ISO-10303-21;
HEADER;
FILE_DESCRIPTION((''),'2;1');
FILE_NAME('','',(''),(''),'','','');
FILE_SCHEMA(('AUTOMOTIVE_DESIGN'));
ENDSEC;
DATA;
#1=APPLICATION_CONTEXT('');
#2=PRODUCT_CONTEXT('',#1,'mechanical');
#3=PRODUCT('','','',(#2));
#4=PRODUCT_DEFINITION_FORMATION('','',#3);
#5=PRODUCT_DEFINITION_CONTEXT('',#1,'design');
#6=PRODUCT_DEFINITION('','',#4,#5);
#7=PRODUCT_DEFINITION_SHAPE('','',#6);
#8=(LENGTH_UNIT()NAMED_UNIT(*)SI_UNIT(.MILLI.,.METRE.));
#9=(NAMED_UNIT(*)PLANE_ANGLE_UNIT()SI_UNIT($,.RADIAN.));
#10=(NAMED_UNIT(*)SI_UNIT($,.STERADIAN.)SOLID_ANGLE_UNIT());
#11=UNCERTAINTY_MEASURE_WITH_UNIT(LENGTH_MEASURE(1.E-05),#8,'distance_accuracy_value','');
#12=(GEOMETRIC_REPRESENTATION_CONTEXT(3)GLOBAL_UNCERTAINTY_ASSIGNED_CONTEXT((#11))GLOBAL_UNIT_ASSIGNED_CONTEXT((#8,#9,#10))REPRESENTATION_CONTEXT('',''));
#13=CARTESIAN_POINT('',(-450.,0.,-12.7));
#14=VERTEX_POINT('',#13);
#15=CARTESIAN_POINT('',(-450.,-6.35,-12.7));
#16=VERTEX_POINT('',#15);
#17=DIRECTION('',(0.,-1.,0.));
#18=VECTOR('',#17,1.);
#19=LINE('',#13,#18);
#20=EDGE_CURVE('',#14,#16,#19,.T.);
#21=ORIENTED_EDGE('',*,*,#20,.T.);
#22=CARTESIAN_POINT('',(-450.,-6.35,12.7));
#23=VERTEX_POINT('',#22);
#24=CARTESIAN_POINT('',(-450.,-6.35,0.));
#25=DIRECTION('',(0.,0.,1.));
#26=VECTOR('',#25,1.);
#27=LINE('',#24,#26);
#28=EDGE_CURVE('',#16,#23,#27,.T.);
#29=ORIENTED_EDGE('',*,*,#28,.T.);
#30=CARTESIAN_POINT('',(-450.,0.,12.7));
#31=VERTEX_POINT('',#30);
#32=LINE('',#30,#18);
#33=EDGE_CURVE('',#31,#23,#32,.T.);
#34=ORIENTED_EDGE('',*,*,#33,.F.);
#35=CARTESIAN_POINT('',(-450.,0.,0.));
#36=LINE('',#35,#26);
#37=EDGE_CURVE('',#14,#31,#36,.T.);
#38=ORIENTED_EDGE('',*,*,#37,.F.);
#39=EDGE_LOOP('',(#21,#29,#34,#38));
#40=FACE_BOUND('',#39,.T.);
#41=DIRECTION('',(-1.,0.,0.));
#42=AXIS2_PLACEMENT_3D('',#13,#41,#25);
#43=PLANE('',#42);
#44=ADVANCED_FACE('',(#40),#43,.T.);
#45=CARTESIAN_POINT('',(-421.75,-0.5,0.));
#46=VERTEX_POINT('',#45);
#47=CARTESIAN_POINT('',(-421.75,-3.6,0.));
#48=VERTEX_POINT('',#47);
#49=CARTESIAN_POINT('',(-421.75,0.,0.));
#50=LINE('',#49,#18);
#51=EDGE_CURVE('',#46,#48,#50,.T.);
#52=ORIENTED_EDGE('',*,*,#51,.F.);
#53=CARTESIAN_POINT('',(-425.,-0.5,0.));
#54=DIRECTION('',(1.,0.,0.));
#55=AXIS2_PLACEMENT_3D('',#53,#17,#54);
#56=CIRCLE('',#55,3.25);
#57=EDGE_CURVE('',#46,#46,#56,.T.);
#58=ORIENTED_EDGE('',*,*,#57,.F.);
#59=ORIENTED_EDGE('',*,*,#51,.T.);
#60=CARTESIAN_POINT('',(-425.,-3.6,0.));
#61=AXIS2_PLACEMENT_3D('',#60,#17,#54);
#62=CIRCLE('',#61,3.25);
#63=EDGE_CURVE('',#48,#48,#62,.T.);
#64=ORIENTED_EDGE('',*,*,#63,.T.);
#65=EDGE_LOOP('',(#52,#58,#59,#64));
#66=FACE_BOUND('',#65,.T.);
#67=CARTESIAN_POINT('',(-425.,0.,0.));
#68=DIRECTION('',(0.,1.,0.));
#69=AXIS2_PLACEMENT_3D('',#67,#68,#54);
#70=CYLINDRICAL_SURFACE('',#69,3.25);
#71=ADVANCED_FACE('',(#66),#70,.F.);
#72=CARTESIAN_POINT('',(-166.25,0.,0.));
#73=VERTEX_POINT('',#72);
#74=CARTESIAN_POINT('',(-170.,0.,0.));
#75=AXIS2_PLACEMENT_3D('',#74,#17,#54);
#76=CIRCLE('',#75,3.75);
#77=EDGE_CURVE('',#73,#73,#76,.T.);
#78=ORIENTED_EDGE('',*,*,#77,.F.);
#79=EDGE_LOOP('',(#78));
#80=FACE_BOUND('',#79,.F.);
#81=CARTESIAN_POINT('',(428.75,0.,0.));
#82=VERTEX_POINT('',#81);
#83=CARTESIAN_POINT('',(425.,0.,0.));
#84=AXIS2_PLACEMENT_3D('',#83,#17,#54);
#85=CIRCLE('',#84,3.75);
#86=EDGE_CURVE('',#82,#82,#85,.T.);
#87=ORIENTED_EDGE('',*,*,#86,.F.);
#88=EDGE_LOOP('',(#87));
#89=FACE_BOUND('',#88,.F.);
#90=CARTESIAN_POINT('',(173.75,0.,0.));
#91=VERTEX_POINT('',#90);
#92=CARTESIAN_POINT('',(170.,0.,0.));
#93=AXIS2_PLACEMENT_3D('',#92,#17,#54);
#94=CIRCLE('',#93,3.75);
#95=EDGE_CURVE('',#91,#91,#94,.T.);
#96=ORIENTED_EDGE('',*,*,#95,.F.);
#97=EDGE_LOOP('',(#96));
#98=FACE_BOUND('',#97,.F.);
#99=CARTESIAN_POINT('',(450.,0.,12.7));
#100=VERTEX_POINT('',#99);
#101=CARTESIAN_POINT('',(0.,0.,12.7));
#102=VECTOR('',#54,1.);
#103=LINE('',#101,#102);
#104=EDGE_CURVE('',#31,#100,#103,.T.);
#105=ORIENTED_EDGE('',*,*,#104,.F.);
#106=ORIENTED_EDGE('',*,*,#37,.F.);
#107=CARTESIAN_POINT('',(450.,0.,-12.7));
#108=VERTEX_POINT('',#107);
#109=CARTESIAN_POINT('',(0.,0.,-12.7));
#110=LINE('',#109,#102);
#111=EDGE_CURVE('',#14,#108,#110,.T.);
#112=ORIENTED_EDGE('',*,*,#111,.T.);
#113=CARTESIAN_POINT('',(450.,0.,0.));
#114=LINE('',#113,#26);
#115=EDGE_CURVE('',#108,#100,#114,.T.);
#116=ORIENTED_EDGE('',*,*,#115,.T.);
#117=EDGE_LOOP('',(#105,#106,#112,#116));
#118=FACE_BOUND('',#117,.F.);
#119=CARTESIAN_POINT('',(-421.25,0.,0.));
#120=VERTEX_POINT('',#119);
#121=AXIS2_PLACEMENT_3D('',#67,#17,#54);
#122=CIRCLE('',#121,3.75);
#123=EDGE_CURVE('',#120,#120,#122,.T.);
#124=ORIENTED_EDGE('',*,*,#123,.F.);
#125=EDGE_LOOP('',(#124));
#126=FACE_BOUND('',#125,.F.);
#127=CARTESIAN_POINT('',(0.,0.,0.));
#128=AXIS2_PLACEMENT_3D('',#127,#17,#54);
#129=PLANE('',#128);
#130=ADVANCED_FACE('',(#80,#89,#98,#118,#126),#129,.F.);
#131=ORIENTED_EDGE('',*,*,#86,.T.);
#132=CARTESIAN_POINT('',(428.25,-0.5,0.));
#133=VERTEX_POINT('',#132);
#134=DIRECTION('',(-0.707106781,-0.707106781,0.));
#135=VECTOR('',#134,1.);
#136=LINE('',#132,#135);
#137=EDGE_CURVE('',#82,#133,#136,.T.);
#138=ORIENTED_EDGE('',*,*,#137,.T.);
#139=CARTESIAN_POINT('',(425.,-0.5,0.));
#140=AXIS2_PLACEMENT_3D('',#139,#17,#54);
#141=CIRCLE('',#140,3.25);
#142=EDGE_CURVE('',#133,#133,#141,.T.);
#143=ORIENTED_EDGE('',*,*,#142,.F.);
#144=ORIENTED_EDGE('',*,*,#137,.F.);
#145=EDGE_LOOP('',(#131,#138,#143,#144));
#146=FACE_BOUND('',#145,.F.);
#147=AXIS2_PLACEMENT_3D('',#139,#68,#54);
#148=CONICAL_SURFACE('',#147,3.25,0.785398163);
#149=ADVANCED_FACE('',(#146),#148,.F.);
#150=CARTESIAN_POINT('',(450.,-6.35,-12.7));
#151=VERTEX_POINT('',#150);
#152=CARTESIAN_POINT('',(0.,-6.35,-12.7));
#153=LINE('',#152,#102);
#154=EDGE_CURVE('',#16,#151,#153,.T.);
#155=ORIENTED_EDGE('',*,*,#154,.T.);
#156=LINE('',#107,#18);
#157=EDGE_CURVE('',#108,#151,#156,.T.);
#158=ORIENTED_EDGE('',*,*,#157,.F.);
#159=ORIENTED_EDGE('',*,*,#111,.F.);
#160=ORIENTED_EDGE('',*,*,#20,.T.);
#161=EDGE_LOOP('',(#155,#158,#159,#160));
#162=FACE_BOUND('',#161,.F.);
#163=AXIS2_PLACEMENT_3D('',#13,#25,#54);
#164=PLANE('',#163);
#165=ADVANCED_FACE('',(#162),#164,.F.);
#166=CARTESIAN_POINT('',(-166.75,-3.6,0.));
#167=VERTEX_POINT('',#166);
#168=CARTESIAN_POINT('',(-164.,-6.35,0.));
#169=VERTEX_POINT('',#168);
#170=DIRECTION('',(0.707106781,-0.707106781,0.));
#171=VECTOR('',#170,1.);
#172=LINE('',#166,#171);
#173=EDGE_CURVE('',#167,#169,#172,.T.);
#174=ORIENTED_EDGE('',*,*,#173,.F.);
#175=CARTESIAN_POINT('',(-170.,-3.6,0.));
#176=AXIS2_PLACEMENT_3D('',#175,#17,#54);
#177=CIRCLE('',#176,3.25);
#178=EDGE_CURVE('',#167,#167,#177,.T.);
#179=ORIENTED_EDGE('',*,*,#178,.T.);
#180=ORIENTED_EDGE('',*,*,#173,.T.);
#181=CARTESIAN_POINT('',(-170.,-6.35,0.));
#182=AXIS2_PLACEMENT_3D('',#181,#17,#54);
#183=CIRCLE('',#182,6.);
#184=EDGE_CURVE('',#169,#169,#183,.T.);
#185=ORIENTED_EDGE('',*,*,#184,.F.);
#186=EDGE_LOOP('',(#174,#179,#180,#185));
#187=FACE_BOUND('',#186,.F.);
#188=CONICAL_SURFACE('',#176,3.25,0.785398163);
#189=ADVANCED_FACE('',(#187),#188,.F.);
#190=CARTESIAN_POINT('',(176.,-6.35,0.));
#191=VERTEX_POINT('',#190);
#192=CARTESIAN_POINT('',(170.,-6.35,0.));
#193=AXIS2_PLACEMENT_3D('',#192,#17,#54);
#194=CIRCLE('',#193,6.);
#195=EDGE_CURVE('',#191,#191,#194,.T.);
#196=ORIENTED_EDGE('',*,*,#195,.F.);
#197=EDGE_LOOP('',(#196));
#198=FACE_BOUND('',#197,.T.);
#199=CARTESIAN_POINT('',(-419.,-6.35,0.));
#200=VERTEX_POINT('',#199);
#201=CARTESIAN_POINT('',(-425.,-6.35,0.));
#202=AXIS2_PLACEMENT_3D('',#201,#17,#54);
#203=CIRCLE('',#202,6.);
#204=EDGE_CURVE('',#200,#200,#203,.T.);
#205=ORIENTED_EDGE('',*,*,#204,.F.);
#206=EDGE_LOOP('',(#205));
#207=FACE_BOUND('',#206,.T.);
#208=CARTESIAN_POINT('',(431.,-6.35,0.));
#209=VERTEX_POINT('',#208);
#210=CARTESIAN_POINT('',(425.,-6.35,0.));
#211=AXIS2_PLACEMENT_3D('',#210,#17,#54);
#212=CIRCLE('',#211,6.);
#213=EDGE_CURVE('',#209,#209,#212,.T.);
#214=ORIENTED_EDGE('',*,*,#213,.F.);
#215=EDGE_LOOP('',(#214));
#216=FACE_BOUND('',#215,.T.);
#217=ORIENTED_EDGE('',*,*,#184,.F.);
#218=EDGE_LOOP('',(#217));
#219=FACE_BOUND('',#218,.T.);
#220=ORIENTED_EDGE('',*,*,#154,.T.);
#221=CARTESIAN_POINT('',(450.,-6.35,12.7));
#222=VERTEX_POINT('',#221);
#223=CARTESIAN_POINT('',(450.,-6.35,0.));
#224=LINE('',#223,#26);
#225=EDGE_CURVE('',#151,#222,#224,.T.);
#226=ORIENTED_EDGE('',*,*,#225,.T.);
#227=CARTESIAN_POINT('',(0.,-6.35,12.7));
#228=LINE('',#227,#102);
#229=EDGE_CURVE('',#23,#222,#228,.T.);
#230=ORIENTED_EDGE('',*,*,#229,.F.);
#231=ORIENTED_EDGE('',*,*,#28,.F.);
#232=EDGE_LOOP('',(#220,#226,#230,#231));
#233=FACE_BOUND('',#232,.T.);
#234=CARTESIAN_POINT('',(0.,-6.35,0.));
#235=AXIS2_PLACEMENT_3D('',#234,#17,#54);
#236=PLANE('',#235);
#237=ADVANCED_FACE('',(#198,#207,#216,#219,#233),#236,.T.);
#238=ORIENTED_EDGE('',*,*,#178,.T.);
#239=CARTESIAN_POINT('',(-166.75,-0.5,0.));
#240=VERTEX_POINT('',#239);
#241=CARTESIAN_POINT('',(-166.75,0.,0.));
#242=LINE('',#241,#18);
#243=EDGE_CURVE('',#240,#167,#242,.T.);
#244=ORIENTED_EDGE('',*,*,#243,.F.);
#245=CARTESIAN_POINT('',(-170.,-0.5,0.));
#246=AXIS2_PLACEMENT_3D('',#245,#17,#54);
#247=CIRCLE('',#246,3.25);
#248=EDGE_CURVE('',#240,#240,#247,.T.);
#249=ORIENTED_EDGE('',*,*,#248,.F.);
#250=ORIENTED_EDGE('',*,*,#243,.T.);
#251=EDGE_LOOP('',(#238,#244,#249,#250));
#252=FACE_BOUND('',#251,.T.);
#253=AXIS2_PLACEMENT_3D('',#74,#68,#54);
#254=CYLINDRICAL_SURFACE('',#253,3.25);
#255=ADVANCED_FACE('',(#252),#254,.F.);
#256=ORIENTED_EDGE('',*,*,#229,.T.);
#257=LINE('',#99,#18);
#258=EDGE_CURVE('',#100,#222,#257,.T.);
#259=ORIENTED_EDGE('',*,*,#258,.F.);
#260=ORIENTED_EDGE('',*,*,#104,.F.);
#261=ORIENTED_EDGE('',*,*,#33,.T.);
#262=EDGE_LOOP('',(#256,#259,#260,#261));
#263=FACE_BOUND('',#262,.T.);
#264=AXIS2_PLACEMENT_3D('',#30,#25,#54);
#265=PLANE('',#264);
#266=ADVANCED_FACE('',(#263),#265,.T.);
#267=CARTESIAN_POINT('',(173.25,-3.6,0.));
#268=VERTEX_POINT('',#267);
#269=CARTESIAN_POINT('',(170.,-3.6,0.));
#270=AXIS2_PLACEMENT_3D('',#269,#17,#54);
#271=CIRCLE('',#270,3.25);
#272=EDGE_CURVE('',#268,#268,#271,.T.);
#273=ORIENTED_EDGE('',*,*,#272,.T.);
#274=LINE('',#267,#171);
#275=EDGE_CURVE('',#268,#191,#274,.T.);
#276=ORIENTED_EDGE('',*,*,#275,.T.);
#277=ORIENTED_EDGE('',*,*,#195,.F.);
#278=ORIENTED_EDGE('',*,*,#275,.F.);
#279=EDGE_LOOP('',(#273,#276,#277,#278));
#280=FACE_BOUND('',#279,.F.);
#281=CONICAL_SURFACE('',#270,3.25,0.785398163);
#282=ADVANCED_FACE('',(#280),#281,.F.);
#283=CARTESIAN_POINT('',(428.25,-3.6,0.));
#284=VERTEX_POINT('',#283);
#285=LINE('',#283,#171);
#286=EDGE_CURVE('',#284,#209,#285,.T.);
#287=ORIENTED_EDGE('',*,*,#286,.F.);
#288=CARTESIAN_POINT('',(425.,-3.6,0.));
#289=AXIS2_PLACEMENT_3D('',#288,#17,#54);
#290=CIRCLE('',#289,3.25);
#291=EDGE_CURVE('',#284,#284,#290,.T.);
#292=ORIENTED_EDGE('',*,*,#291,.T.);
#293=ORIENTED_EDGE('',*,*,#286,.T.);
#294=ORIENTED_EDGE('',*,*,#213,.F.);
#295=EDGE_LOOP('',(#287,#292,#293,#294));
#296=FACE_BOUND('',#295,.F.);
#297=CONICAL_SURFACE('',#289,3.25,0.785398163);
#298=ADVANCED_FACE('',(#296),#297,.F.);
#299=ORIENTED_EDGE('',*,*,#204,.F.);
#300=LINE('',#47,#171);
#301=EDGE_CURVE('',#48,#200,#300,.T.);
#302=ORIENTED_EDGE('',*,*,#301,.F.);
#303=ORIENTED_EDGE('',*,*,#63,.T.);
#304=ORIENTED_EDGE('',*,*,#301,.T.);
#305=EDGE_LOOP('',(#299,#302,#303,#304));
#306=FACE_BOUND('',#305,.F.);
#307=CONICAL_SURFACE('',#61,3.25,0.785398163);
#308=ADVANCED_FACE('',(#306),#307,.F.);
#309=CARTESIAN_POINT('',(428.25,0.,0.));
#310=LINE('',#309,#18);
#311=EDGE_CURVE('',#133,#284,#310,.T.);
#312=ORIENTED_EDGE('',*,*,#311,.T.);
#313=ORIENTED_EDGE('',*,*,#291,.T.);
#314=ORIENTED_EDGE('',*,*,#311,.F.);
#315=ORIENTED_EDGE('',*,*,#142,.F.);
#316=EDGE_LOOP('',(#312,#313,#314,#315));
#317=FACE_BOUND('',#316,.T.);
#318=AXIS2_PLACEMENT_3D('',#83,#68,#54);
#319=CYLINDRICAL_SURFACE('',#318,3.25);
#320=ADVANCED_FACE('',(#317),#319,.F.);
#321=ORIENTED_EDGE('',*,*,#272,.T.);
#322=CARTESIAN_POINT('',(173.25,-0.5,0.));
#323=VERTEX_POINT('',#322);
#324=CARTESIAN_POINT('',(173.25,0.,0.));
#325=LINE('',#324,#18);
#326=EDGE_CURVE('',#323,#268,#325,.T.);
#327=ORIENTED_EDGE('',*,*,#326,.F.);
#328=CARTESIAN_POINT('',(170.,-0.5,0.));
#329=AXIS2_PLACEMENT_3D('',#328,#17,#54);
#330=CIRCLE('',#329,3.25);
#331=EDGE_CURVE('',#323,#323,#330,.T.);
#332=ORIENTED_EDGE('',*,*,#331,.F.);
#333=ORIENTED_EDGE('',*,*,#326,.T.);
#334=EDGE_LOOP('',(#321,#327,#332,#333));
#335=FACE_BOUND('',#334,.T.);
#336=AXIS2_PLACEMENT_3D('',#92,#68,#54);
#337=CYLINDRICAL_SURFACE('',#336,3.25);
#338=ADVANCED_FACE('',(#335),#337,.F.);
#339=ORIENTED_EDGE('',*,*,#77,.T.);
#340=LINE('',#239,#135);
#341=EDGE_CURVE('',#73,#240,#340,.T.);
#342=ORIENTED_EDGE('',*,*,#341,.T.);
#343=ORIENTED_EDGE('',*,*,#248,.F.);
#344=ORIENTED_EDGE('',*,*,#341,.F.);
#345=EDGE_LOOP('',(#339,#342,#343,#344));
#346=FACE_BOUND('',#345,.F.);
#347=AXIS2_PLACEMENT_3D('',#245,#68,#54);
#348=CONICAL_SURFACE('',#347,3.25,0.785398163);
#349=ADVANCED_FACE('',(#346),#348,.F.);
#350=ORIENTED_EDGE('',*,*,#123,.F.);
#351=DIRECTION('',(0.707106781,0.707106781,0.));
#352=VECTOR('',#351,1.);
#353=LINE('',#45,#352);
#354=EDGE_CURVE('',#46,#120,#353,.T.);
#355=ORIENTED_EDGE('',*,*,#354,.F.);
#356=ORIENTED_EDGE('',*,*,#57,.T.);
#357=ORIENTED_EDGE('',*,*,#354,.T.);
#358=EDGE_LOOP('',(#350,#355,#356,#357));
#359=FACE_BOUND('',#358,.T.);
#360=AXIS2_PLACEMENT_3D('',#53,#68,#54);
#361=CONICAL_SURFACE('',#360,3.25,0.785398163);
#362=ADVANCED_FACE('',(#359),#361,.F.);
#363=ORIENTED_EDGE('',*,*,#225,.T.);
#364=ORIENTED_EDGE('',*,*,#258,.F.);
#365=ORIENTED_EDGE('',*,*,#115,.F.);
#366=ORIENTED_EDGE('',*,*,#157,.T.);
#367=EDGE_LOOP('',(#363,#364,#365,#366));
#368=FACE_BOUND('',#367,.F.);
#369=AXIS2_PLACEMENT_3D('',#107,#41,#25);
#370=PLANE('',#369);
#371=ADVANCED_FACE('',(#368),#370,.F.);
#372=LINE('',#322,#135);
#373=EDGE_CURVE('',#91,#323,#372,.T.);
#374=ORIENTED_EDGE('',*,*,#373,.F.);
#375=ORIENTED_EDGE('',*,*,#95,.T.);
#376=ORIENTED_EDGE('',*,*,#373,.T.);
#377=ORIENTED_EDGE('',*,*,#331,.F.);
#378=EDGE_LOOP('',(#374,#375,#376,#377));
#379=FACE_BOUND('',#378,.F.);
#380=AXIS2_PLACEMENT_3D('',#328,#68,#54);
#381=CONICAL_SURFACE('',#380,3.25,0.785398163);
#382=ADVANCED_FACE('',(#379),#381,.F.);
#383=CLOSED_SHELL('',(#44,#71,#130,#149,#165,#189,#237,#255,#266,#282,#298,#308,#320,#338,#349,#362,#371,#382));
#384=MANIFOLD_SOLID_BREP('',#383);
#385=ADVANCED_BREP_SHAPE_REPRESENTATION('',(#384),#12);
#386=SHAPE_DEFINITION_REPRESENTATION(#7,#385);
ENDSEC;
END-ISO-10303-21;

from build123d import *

# Parameters (mm, degrees)
F0_W     = 900
F0_H     = 25.4
F0_R     = 3.25
F1_DEPTH = 6.35
F2_SIZE  = 2.75
F3_SIZE  = 0.5


with BuildPart() as f1:
    # F0 (on Front) → F1 (new body)
    with BuildSketch(Plane.XZ):
        Rectangle(F0_W, F0_H)
        with Locations((-425, 0)):
            Circle(F0_R, mode=Mode.SUBTRACT)
        with Locations((-170, 0)):
            Circle(F0_R, mode=Mode.SUBTRACT)
        with Locations((170, 0)):
            Circle(F0_R, mode=Mode.SUBTRACT)
        with Locations((425, 0)):
            Circle(F0_R, mode=Mode.SUBTRACT)
    extrude(amount=F1_DEPTH)

    # F2
    f2_edges = [f1.edges().sort_by_distance(p)[0] for p in [
        (-428.25, -6.35, 0),
        (-173.25, -6.35, 0),
        (166.75, -6.35, 0),
        (421.75, -6.35, 0),
    ]]
    chamfer(f2_edges, length=F2_SIZE)

    # F3
    f3_edges = [f1.edges().sort_by_distance(p)[0] for p in [
        (421.75, 0, 0),
        (166.75, 0, 0),
        (-173.25, 0, 0),
        (-428.25, 0, 0),
    ]]
    chamfer(f3_edges, length=F3_SIZE)


solid = f1.part
